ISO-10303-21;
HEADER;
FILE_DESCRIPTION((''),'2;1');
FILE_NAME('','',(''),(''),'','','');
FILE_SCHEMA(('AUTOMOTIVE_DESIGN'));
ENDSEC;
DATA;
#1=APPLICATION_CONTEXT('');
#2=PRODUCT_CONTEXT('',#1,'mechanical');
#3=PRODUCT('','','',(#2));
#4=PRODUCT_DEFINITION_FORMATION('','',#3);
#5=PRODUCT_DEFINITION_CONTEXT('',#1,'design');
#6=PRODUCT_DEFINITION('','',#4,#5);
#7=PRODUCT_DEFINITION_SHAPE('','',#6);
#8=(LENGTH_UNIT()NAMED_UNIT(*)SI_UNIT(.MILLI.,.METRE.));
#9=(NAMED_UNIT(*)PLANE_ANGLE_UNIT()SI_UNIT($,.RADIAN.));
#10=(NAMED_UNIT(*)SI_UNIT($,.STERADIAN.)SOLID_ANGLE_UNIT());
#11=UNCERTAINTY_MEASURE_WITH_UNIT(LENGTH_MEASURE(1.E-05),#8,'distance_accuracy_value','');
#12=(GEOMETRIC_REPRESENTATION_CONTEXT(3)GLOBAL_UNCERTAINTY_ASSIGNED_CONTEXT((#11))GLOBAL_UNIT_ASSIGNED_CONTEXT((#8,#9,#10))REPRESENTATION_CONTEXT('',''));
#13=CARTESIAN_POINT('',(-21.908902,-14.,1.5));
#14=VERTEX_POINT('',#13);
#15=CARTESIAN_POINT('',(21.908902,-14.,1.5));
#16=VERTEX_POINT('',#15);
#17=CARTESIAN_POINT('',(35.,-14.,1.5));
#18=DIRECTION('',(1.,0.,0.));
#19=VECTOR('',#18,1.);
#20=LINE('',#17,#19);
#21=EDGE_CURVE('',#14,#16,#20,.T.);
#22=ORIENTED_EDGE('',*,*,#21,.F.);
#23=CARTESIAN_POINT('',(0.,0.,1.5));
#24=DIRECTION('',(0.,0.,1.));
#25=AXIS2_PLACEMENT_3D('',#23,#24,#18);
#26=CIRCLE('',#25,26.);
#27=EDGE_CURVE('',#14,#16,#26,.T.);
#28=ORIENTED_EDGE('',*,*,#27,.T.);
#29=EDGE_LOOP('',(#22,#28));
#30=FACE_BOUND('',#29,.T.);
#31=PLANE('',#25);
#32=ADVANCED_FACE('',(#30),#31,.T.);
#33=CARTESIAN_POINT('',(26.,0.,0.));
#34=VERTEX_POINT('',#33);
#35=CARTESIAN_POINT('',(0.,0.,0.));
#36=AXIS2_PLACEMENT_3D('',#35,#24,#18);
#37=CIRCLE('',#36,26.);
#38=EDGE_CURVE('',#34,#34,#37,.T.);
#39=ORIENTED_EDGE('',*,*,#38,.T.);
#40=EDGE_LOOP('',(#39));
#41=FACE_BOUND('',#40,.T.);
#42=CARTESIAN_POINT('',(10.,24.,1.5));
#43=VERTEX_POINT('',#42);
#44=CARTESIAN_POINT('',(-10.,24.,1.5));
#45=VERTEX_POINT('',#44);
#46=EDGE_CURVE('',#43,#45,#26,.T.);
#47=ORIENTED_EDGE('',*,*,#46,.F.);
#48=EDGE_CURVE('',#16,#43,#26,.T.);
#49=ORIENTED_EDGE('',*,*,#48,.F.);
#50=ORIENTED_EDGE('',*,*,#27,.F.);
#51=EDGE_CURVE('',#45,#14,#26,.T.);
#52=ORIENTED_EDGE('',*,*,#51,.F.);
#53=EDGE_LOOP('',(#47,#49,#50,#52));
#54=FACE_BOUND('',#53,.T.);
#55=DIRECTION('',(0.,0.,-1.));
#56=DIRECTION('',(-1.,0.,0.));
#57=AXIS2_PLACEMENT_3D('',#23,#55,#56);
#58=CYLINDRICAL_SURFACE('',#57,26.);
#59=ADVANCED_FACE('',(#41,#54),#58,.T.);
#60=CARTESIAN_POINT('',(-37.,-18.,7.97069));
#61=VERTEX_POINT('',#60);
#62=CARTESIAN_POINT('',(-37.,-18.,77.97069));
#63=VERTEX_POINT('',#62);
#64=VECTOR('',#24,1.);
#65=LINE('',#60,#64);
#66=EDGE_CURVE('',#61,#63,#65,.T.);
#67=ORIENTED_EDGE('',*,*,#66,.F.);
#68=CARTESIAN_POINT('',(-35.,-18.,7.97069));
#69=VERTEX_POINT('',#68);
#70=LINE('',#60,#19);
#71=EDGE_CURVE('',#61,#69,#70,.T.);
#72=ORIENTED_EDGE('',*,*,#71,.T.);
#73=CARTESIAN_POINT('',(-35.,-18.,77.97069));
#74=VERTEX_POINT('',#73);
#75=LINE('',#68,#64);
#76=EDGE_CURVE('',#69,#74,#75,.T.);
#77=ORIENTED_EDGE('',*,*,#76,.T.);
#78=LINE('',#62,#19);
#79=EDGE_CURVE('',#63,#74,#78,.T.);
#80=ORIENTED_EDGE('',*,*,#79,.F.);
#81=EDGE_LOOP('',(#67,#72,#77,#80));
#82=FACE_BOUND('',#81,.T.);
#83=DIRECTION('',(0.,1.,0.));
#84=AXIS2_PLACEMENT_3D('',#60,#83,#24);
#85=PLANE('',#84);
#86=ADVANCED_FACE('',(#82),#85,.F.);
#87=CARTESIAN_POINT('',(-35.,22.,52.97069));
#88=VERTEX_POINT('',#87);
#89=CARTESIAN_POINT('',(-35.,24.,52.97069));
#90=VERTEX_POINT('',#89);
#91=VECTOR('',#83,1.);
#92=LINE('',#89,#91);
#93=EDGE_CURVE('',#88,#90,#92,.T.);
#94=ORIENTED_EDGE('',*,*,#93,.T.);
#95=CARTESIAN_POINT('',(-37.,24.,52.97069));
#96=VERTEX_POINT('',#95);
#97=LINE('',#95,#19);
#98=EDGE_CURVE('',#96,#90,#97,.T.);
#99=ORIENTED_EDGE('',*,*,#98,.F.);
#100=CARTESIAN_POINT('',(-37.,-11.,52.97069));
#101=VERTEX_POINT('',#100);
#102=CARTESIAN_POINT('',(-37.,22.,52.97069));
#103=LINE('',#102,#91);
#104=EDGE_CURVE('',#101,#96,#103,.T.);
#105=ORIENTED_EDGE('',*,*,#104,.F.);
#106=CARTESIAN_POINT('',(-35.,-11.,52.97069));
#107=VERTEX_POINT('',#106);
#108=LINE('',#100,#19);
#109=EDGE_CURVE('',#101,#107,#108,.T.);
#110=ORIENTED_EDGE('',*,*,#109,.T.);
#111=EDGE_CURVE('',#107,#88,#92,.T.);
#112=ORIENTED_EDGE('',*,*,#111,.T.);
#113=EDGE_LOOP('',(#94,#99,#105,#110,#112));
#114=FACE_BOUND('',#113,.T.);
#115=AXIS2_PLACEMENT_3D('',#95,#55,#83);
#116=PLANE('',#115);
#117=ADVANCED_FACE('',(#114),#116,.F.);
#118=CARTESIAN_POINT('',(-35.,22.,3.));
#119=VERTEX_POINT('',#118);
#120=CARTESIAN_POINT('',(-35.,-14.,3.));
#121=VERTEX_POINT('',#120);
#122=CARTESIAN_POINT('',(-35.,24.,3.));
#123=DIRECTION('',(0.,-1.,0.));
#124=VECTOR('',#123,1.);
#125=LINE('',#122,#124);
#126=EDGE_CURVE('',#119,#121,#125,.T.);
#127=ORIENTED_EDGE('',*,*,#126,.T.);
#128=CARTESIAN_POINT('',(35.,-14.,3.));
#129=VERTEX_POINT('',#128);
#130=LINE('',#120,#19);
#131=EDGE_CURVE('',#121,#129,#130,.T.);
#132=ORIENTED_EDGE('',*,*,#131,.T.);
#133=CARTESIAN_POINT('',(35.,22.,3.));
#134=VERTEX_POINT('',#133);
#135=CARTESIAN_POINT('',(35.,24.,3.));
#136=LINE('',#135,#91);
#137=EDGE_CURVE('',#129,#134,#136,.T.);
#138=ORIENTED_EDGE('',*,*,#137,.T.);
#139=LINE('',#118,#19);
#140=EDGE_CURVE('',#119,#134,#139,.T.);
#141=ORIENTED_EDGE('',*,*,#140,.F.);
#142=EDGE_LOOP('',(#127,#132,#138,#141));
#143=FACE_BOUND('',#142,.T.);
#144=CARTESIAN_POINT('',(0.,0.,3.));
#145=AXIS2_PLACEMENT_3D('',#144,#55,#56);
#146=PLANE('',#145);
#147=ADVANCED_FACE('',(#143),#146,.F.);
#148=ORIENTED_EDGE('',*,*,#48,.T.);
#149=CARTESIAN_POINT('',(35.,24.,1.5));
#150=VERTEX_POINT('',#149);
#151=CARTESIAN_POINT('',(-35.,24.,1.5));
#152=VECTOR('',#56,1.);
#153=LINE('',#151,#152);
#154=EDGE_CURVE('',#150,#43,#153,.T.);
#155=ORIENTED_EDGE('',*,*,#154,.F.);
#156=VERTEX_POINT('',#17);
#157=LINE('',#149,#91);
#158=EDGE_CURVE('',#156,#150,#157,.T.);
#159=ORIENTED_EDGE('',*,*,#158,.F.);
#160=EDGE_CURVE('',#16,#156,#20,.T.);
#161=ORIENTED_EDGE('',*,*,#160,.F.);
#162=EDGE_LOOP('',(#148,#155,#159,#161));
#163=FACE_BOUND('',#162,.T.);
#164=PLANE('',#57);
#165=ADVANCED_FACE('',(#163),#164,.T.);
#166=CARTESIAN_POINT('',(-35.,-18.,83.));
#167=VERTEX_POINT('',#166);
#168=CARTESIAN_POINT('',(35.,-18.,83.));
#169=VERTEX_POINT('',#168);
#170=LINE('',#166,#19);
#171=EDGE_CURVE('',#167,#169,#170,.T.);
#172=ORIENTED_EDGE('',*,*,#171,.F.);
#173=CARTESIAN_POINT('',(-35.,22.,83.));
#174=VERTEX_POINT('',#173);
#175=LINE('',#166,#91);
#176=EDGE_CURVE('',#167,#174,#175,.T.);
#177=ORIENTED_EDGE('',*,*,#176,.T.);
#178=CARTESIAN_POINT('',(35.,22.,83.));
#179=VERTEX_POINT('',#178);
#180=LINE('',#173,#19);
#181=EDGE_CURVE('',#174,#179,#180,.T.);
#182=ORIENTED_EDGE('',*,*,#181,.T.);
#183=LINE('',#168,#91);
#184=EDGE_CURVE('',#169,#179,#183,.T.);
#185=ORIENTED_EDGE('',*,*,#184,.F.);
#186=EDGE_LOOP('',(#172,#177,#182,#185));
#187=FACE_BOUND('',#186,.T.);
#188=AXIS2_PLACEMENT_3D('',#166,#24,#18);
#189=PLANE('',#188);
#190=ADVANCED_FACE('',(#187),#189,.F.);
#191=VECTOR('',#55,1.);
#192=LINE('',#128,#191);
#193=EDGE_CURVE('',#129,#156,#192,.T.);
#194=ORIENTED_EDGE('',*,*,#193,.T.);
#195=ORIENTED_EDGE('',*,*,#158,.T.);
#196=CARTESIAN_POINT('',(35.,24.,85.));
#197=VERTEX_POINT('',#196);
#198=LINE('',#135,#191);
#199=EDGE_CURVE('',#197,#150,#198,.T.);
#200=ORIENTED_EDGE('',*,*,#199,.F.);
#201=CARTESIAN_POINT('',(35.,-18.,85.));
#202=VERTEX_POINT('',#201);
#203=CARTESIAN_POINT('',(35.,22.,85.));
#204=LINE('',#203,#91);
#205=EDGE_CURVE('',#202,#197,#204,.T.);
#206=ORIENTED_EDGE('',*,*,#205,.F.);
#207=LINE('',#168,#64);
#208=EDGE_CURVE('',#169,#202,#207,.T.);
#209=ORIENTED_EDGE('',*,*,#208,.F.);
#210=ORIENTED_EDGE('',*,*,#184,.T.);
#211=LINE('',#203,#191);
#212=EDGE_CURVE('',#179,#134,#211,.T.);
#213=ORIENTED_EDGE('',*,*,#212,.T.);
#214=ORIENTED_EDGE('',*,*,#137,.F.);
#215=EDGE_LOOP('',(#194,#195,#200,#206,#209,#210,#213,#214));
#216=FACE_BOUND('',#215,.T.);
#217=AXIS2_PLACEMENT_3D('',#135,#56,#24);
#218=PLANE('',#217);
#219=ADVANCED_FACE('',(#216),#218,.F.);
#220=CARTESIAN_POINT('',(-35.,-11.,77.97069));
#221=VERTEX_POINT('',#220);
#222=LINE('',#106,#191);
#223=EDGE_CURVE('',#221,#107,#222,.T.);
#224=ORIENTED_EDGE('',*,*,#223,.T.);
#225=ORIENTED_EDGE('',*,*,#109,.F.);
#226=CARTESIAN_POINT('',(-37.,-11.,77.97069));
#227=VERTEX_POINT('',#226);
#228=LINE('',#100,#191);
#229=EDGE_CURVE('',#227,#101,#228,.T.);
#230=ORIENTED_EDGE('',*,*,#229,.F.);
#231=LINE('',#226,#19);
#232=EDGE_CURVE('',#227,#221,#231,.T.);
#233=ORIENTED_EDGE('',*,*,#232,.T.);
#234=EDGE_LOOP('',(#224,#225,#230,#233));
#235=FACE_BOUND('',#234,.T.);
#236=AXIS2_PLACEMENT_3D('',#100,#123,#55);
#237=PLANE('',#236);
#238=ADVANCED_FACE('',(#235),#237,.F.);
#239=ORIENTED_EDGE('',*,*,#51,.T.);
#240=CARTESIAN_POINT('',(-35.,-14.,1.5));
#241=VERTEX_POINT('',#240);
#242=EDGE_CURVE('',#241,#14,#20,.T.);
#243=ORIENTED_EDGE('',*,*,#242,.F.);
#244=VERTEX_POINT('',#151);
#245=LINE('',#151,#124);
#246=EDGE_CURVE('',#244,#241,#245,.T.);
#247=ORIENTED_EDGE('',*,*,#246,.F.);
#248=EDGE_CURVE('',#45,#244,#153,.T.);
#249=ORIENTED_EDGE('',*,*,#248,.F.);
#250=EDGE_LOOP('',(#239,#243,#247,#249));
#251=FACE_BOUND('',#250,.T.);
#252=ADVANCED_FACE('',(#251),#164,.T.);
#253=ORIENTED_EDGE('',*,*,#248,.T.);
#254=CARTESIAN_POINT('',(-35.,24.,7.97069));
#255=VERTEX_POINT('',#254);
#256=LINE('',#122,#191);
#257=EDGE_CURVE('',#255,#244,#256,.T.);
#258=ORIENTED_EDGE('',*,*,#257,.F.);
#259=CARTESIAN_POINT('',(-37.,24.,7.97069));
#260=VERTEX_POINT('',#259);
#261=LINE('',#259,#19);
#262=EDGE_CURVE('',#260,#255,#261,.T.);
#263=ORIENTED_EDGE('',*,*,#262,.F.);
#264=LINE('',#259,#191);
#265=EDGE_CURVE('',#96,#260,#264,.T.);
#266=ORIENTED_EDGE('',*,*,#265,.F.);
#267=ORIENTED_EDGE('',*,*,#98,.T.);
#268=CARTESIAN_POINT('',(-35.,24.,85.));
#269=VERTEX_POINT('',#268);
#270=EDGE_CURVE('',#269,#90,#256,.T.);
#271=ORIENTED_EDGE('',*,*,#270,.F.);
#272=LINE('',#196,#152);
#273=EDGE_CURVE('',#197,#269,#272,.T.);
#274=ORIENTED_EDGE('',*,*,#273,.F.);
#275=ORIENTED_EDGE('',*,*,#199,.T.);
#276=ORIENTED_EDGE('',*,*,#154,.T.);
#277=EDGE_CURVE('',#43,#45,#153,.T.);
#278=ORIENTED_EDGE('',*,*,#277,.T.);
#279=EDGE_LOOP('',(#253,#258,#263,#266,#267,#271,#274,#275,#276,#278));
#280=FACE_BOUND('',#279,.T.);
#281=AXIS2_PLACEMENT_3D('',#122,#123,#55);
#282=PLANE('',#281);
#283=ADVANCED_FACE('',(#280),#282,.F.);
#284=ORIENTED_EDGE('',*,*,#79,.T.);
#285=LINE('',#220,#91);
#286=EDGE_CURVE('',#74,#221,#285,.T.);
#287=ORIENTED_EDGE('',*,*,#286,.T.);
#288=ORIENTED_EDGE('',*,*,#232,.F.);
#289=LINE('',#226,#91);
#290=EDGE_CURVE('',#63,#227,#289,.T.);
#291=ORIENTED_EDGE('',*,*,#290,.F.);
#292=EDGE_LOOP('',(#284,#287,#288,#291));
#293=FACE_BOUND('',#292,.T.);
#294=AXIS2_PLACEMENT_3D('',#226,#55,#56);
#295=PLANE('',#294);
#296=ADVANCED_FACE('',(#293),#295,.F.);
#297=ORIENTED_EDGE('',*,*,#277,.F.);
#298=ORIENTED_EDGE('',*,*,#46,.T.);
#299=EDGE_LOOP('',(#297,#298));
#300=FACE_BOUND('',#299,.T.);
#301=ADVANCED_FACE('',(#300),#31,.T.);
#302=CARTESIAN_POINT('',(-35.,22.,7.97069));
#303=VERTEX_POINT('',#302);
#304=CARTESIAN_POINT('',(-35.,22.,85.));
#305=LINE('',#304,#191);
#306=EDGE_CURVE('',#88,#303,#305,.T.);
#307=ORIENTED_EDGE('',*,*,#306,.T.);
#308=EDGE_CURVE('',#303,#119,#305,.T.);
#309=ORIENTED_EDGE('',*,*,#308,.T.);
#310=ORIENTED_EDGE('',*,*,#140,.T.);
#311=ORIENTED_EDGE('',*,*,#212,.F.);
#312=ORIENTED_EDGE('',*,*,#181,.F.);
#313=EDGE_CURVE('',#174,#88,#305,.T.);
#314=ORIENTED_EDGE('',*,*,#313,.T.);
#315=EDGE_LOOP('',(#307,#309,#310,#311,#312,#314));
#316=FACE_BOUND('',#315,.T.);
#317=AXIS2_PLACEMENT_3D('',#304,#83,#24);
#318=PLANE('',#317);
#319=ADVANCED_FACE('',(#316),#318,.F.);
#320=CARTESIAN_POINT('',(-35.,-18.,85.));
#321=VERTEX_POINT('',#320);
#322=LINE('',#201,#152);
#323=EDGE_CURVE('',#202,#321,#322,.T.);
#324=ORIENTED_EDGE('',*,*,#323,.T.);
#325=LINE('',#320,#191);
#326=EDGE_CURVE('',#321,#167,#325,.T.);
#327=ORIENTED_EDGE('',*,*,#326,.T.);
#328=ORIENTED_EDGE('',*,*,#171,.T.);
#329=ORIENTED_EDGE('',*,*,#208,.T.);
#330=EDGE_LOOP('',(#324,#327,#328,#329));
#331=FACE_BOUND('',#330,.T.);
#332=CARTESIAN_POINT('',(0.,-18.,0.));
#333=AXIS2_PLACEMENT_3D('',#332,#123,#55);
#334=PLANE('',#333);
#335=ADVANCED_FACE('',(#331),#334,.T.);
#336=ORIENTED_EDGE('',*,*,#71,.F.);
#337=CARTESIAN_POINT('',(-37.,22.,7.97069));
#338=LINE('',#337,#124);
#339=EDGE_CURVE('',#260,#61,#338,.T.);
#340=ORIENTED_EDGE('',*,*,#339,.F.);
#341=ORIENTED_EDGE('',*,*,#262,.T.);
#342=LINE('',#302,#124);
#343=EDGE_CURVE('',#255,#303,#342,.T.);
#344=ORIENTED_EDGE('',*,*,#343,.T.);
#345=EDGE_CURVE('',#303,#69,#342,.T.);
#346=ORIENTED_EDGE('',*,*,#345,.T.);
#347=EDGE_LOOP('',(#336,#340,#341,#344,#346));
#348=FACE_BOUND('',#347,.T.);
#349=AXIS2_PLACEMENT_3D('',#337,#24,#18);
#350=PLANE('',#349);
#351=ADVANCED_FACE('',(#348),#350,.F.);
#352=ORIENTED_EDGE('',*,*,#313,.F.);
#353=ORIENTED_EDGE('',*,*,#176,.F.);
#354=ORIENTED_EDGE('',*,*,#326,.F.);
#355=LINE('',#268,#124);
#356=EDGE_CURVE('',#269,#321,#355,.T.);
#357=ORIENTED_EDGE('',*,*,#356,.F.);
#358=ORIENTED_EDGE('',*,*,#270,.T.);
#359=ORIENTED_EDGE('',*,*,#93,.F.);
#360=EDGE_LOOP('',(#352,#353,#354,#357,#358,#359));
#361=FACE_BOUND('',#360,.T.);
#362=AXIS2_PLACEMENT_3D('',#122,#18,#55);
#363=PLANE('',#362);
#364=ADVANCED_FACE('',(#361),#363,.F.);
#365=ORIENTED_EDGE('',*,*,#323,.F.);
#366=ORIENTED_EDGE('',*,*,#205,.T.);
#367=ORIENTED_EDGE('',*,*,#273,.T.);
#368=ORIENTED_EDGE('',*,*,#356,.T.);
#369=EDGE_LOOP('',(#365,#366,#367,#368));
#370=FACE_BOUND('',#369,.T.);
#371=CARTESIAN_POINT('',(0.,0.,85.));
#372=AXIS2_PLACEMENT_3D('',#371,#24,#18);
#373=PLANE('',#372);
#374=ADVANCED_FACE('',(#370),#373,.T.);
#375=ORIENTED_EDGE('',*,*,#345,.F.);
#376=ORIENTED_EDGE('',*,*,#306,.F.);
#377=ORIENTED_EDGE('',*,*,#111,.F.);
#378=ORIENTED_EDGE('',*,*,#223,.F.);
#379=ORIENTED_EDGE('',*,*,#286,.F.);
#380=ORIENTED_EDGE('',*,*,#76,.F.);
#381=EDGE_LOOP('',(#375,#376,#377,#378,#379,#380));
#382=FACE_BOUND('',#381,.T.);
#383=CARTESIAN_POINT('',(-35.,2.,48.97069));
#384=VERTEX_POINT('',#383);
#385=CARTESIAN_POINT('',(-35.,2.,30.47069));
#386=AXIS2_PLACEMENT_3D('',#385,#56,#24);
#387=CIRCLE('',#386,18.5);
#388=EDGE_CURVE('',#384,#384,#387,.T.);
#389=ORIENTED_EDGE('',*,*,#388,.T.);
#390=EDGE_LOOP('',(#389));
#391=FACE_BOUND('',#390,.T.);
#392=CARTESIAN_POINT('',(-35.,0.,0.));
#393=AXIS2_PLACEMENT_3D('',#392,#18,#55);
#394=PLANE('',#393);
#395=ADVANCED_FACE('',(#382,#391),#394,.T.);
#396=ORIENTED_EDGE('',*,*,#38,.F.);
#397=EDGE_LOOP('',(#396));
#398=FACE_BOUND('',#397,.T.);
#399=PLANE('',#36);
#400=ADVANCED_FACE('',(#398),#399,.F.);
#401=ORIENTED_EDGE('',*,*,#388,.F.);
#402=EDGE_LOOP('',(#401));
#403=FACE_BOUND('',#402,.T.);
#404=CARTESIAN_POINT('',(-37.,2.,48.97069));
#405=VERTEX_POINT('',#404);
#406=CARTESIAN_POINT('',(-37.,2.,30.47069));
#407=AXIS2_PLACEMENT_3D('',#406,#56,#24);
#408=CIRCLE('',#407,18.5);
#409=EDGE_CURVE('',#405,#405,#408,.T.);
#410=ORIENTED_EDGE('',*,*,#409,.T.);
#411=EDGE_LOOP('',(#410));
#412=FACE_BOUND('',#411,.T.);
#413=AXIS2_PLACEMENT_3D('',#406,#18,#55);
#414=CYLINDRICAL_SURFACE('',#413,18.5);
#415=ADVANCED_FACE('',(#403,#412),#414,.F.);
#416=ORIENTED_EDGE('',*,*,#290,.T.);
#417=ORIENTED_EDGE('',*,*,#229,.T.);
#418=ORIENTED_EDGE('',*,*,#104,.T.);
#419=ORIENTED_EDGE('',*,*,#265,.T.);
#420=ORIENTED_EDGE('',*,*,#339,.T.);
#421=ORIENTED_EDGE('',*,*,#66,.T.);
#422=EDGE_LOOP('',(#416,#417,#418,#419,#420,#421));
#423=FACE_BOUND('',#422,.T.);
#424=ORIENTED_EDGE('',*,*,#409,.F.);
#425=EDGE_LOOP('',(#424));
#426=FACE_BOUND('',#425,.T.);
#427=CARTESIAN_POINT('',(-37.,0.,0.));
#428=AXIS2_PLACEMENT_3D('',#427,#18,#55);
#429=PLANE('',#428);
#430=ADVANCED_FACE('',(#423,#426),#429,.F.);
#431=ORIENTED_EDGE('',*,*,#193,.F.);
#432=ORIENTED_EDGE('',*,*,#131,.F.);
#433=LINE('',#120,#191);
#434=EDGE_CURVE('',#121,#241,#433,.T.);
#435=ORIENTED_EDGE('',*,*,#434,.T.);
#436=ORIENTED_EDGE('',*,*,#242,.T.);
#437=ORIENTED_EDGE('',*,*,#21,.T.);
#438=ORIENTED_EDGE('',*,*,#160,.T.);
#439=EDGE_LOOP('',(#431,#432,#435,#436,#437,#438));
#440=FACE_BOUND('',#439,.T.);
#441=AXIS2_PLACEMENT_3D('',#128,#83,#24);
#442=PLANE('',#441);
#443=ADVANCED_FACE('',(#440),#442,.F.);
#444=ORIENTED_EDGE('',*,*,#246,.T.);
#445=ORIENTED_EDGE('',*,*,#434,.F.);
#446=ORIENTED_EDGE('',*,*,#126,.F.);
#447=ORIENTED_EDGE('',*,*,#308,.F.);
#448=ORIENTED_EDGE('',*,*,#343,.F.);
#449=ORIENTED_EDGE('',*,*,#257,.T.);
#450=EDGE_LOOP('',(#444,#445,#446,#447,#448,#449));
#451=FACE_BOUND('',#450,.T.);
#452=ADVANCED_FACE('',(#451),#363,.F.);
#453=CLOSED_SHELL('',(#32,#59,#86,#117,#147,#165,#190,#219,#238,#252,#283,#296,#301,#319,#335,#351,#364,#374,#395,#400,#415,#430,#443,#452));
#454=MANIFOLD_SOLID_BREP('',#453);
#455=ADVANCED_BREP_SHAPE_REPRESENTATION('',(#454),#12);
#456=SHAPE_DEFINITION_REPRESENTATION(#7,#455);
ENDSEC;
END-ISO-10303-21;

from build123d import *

# Parameters (mm, degrees)
SKETCH_1_R      = 26
EXTRUDE_1_DEPTH = 1.5
EXTRUDE_2_DEPTH = 1.5
SKETCH_3_W      = 70
SKETCH_3_H      = 2
EXTRUDE_3_DEPTH = 82
SKETCH_4_W      = 70
SKETCH_4_H      = 2
EXTRUDE_4_DEPTH = 40
SKETCH_5_R      = 18.5
EXTRUDE_5_DEPTH = 2


with BuildPart() as part:
    # 草图1 → 凸台-拉伸1 (new body)
    with BuildSketch(Plane.XY):
        Circle(SKETCH_1_R)
    extrude(amount=EXTRUDE_1_DEPTH)

    # 草图2 → 凸台-拉伸2 (add)
    with BuildSketch(Plane.XY.offset(1.5)):
        Polygon((-35, 24), (-35, -14), (-21.9089023, -14), (21.9089023, -14), (35, -14), (35, 24), align=None)
    extrude(amount=EXTRUDE_2_DEPTH)

    # 草图3 → 凸台-拉伸3 (add)
    with BuildSketch(Plane.XY.offset(3)):
        with Locations((0, 23)):
            Rectangle(SKETCH_3_W, SKETCH_3_H)
    extrude(amount=EXTRUDE_3_DEPTH)

    # 草图4 → 凸台-拉伸4 (add)
    with BuildSketch(Plane.XZ.offset(-22)):
        with Locations((0, 84)):
            Rectangle(SKETCH_4_W, SKETCH_4_H)
    extrude(amount=EXTRUDE_4_DEPTH)

    # 草图5 → 凸台-拉伸5 (add)
    with BuildSketch(Plane.ZY.offset(35)):
        Polygon((7.970689751, -18), (77.970689751, -18), (77.970689751, -11), (52.970689751, -11), (52.970689751, 22), (52.970689751, 24), (7.970689751, 24), (7.970689751, 22), align=None)
        with Locations((30.470689751, 2)):
            Circle(SKETCH_5_R, mode=Mode.SUBTRACT)
    extrude(amount=EXTRUDE_5_DEPTH)


solid = part.part
